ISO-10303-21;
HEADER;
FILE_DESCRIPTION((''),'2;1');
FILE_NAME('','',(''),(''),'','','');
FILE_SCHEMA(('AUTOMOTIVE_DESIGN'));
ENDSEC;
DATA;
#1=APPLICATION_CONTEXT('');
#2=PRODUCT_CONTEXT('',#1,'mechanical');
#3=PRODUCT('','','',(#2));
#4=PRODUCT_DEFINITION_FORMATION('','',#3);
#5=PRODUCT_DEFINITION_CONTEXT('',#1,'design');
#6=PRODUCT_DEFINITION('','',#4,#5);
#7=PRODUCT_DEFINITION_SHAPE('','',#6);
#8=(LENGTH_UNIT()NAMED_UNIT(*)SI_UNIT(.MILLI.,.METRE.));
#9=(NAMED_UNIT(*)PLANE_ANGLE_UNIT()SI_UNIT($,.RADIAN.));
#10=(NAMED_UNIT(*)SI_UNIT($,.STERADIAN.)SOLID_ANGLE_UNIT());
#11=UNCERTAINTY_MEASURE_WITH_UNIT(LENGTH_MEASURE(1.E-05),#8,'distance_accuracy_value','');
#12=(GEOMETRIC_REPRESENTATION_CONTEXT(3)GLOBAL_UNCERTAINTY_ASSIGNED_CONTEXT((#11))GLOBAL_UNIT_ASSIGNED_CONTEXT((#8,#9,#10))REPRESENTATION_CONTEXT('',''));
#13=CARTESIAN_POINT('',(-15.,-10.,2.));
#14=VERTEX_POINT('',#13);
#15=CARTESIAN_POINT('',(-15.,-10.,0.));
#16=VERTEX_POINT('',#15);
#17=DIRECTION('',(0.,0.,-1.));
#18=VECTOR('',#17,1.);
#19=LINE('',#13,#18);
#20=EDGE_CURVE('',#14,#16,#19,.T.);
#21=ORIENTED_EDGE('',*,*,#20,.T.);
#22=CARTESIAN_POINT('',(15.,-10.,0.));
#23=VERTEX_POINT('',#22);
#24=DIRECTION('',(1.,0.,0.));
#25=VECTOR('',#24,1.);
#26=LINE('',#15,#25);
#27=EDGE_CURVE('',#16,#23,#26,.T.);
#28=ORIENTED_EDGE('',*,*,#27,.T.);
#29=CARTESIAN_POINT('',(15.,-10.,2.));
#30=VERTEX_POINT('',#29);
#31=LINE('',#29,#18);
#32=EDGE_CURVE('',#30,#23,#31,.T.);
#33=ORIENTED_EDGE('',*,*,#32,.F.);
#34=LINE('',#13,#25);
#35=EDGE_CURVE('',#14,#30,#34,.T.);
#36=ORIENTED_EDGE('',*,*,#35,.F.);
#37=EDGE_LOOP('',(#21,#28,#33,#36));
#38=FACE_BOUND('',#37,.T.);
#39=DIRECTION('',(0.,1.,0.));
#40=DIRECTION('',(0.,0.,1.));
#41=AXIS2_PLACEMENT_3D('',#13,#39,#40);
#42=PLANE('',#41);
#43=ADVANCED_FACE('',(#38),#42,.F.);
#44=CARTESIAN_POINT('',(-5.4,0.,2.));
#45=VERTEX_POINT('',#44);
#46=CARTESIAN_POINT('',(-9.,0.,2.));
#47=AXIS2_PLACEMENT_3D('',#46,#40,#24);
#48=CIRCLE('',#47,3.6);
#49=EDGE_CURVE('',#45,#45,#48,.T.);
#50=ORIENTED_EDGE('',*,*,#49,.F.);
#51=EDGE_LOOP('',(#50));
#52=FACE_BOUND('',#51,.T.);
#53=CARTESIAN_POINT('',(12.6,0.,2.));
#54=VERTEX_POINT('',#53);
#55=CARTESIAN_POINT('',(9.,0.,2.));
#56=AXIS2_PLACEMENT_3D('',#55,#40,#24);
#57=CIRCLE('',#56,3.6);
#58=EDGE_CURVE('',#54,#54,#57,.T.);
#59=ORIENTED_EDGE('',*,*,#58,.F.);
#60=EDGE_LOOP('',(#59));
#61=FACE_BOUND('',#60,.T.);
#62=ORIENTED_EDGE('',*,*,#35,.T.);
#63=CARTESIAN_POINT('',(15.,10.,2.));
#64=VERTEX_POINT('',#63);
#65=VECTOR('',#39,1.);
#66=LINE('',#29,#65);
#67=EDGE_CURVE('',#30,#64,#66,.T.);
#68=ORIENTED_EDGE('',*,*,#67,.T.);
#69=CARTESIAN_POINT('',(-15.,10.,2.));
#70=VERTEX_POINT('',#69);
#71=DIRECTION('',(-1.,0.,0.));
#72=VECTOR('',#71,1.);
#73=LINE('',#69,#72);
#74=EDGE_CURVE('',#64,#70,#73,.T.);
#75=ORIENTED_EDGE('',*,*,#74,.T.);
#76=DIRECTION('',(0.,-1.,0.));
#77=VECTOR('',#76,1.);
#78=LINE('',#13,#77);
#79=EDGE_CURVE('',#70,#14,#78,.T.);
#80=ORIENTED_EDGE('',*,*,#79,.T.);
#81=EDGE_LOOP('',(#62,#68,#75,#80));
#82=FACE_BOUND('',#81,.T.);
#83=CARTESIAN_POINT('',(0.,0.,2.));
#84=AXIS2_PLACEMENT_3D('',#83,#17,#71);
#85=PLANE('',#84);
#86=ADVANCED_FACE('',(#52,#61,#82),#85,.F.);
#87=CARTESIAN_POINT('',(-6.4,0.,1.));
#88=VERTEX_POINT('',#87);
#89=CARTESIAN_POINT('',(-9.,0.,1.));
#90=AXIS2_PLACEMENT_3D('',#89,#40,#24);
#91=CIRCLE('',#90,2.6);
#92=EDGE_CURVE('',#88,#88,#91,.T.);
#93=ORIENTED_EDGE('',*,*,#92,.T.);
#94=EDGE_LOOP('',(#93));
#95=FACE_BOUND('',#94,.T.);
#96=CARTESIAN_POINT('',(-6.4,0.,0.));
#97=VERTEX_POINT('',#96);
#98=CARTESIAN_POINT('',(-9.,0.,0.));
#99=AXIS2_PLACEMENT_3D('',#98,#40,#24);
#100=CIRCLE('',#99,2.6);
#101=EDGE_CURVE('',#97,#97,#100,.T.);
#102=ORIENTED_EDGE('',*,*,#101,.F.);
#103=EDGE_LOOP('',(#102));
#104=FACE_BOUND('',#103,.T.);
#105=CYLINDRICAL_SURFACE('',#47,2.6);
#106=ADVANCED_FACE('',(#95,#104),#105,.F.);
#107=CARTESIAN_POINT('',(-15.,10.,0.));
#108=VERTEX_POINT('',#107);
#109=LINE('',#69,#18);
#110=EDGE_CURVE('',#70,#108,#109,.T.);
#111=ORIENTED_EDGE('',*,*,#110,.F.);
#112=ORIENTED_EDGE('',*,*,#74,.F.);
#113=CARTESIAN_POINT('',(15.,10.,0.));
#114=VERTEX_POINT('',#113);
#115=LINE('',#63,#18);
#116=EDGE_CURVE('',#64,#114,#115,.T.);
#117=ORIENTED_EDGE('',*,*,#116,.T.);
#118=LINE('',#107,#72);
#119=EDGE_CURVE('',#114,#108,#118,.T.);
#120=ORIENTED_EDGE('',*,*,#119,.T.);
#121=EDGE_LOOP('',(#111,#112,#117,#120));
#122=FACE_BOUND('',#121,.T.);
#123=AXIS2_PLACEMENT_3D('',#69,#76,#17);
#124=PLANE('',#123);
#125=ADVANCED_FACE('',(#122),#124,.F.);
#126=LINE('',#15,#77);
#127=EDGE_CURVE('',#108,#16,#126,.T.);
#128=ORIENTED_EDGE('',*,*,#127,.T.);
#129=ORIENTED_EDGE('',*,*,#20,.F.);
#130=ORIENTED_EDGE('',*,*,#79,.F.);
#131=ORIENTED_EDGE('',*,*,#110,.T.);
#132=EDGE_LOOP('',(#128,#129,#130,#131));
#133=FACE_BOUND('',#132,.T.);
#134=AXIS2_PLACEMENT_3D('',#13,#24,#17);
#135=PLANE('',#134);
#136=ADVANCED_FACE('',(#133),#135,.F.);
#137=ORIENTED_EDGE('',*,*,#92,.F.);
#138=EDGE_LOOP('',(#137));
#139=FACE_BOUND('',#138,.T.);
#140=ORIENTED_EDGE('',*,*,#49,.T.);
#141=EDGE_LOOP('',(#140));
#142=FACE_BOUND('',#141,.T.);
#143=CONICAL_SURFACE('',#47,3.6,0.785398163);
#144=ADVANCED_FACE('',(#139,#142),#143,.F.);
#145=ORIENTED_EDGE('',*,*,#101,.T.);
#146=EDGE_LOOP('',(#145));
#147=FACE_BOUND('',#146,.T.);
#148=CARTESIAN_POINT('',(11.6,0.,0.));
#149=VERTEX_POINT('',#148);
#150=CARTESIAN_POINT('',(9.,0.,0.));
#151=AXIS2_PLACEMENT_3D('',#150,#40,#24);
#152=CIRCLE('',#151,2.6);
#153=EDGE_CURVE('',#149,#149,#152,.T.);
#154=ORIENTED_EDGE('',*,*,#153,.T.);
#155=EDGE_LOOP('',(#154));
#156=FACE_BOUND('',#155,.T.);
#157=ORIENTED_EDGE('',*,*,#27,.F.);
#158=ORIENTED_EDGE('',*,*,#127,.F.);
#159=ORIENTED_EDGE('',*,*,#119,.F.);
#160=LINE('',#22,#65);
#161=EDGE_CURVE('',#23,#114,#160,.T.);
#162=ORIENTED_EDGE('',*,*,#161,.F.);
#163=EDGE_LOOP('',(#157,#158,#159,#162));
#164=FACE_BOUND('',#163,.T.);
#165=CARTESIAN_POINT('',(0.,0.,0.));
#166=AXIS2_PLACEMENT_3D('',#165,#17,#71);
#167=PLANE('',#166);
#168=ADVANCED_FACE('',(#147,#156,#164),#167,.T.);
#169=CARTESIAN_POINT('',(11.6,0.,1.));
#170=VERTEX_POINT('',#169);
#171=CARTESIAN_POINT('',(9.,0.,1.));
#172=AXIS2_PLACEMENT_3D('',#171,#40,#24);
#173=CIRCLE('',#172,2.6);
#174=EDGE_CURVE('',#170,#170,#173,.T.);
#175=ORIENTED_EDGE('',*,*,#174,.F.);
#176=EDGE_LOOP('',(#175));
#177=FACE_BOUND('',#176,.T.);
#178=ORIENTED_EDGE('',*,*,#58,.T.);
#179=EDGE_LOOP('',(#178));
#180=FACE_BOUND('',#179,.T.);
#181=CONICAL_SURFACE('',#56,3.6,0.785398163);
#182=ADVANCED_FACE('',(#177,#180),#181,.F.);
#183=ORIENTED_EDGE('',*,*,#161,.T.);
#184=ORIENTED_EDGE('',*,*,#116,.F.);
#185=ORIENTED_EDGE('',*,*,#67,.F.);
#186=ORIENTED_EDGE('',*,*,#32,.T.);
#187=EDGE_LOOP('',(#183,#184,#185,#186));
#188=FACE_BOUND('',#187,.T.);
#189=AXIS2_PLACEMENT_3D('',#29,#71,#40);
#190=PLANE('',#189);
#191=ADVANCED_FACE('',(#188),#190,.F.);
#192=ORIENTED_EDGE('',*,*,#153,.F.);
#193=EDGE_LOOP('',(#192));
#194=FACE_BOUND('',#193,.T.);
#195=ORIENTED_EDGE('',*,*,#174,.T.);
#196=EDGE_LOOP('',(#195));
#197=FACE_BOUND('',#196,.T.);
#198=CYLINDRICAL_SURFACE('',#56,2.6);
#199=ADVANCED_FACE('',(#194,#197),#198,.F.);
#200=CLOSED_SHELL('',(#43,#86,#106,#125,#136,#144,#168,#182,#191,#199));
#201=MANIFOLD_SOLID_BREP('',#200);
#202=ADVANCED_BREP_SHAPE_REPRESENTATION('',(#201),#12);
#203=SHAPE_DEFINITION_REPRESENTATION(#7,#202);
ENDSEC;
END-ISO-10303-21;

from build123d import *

# Parameters (mm, degrees)
SKETCH1_W          = 30
SKETCH1_H          = 20
BASE_FLANGE1_DEPTH = 2


# Sheet-metal steps are written as plain solids
with BuildPart() as part:
    # Sketch1 → Base-Flange1 (new body)
    with BuildSketch(Plane.XY):
        Rectangle(SKETCH1_W, SKETCH1_H)
    extrude(amount=BASE_FLANGE1_DEPTH)

    # Sketch6 → Ø5.2 (5.2) Diameter Hole1 (revolve, cut)
    with BuildSketch(Plane(origin=(-9, 0, 2), x_dir=(0, -1, 0), z_dir=(1, 0, 0))):
        Polygon((0, 0), (0, 2), (2.6, 2), (2.6, 1), (3.6, 0), align=None)
    f_5_2_5_2_diameter_hole1 = revolve(axis=Axis((-9, 0, 8.35), (0, 0, -1)), mode=Mode.SUBTRACT)

    # Mirror1: Ø5.2 (5.2) Diameter Hole1 across plane
    add(f_5_2_5_2_diameter_hole1.mirror(Plane(origin=(0, 0, 0), x_dir=(0, 0, 1), z_dir=(1, 0, 0))), mode=Mode.SUBTRACT)


solid = part.part
